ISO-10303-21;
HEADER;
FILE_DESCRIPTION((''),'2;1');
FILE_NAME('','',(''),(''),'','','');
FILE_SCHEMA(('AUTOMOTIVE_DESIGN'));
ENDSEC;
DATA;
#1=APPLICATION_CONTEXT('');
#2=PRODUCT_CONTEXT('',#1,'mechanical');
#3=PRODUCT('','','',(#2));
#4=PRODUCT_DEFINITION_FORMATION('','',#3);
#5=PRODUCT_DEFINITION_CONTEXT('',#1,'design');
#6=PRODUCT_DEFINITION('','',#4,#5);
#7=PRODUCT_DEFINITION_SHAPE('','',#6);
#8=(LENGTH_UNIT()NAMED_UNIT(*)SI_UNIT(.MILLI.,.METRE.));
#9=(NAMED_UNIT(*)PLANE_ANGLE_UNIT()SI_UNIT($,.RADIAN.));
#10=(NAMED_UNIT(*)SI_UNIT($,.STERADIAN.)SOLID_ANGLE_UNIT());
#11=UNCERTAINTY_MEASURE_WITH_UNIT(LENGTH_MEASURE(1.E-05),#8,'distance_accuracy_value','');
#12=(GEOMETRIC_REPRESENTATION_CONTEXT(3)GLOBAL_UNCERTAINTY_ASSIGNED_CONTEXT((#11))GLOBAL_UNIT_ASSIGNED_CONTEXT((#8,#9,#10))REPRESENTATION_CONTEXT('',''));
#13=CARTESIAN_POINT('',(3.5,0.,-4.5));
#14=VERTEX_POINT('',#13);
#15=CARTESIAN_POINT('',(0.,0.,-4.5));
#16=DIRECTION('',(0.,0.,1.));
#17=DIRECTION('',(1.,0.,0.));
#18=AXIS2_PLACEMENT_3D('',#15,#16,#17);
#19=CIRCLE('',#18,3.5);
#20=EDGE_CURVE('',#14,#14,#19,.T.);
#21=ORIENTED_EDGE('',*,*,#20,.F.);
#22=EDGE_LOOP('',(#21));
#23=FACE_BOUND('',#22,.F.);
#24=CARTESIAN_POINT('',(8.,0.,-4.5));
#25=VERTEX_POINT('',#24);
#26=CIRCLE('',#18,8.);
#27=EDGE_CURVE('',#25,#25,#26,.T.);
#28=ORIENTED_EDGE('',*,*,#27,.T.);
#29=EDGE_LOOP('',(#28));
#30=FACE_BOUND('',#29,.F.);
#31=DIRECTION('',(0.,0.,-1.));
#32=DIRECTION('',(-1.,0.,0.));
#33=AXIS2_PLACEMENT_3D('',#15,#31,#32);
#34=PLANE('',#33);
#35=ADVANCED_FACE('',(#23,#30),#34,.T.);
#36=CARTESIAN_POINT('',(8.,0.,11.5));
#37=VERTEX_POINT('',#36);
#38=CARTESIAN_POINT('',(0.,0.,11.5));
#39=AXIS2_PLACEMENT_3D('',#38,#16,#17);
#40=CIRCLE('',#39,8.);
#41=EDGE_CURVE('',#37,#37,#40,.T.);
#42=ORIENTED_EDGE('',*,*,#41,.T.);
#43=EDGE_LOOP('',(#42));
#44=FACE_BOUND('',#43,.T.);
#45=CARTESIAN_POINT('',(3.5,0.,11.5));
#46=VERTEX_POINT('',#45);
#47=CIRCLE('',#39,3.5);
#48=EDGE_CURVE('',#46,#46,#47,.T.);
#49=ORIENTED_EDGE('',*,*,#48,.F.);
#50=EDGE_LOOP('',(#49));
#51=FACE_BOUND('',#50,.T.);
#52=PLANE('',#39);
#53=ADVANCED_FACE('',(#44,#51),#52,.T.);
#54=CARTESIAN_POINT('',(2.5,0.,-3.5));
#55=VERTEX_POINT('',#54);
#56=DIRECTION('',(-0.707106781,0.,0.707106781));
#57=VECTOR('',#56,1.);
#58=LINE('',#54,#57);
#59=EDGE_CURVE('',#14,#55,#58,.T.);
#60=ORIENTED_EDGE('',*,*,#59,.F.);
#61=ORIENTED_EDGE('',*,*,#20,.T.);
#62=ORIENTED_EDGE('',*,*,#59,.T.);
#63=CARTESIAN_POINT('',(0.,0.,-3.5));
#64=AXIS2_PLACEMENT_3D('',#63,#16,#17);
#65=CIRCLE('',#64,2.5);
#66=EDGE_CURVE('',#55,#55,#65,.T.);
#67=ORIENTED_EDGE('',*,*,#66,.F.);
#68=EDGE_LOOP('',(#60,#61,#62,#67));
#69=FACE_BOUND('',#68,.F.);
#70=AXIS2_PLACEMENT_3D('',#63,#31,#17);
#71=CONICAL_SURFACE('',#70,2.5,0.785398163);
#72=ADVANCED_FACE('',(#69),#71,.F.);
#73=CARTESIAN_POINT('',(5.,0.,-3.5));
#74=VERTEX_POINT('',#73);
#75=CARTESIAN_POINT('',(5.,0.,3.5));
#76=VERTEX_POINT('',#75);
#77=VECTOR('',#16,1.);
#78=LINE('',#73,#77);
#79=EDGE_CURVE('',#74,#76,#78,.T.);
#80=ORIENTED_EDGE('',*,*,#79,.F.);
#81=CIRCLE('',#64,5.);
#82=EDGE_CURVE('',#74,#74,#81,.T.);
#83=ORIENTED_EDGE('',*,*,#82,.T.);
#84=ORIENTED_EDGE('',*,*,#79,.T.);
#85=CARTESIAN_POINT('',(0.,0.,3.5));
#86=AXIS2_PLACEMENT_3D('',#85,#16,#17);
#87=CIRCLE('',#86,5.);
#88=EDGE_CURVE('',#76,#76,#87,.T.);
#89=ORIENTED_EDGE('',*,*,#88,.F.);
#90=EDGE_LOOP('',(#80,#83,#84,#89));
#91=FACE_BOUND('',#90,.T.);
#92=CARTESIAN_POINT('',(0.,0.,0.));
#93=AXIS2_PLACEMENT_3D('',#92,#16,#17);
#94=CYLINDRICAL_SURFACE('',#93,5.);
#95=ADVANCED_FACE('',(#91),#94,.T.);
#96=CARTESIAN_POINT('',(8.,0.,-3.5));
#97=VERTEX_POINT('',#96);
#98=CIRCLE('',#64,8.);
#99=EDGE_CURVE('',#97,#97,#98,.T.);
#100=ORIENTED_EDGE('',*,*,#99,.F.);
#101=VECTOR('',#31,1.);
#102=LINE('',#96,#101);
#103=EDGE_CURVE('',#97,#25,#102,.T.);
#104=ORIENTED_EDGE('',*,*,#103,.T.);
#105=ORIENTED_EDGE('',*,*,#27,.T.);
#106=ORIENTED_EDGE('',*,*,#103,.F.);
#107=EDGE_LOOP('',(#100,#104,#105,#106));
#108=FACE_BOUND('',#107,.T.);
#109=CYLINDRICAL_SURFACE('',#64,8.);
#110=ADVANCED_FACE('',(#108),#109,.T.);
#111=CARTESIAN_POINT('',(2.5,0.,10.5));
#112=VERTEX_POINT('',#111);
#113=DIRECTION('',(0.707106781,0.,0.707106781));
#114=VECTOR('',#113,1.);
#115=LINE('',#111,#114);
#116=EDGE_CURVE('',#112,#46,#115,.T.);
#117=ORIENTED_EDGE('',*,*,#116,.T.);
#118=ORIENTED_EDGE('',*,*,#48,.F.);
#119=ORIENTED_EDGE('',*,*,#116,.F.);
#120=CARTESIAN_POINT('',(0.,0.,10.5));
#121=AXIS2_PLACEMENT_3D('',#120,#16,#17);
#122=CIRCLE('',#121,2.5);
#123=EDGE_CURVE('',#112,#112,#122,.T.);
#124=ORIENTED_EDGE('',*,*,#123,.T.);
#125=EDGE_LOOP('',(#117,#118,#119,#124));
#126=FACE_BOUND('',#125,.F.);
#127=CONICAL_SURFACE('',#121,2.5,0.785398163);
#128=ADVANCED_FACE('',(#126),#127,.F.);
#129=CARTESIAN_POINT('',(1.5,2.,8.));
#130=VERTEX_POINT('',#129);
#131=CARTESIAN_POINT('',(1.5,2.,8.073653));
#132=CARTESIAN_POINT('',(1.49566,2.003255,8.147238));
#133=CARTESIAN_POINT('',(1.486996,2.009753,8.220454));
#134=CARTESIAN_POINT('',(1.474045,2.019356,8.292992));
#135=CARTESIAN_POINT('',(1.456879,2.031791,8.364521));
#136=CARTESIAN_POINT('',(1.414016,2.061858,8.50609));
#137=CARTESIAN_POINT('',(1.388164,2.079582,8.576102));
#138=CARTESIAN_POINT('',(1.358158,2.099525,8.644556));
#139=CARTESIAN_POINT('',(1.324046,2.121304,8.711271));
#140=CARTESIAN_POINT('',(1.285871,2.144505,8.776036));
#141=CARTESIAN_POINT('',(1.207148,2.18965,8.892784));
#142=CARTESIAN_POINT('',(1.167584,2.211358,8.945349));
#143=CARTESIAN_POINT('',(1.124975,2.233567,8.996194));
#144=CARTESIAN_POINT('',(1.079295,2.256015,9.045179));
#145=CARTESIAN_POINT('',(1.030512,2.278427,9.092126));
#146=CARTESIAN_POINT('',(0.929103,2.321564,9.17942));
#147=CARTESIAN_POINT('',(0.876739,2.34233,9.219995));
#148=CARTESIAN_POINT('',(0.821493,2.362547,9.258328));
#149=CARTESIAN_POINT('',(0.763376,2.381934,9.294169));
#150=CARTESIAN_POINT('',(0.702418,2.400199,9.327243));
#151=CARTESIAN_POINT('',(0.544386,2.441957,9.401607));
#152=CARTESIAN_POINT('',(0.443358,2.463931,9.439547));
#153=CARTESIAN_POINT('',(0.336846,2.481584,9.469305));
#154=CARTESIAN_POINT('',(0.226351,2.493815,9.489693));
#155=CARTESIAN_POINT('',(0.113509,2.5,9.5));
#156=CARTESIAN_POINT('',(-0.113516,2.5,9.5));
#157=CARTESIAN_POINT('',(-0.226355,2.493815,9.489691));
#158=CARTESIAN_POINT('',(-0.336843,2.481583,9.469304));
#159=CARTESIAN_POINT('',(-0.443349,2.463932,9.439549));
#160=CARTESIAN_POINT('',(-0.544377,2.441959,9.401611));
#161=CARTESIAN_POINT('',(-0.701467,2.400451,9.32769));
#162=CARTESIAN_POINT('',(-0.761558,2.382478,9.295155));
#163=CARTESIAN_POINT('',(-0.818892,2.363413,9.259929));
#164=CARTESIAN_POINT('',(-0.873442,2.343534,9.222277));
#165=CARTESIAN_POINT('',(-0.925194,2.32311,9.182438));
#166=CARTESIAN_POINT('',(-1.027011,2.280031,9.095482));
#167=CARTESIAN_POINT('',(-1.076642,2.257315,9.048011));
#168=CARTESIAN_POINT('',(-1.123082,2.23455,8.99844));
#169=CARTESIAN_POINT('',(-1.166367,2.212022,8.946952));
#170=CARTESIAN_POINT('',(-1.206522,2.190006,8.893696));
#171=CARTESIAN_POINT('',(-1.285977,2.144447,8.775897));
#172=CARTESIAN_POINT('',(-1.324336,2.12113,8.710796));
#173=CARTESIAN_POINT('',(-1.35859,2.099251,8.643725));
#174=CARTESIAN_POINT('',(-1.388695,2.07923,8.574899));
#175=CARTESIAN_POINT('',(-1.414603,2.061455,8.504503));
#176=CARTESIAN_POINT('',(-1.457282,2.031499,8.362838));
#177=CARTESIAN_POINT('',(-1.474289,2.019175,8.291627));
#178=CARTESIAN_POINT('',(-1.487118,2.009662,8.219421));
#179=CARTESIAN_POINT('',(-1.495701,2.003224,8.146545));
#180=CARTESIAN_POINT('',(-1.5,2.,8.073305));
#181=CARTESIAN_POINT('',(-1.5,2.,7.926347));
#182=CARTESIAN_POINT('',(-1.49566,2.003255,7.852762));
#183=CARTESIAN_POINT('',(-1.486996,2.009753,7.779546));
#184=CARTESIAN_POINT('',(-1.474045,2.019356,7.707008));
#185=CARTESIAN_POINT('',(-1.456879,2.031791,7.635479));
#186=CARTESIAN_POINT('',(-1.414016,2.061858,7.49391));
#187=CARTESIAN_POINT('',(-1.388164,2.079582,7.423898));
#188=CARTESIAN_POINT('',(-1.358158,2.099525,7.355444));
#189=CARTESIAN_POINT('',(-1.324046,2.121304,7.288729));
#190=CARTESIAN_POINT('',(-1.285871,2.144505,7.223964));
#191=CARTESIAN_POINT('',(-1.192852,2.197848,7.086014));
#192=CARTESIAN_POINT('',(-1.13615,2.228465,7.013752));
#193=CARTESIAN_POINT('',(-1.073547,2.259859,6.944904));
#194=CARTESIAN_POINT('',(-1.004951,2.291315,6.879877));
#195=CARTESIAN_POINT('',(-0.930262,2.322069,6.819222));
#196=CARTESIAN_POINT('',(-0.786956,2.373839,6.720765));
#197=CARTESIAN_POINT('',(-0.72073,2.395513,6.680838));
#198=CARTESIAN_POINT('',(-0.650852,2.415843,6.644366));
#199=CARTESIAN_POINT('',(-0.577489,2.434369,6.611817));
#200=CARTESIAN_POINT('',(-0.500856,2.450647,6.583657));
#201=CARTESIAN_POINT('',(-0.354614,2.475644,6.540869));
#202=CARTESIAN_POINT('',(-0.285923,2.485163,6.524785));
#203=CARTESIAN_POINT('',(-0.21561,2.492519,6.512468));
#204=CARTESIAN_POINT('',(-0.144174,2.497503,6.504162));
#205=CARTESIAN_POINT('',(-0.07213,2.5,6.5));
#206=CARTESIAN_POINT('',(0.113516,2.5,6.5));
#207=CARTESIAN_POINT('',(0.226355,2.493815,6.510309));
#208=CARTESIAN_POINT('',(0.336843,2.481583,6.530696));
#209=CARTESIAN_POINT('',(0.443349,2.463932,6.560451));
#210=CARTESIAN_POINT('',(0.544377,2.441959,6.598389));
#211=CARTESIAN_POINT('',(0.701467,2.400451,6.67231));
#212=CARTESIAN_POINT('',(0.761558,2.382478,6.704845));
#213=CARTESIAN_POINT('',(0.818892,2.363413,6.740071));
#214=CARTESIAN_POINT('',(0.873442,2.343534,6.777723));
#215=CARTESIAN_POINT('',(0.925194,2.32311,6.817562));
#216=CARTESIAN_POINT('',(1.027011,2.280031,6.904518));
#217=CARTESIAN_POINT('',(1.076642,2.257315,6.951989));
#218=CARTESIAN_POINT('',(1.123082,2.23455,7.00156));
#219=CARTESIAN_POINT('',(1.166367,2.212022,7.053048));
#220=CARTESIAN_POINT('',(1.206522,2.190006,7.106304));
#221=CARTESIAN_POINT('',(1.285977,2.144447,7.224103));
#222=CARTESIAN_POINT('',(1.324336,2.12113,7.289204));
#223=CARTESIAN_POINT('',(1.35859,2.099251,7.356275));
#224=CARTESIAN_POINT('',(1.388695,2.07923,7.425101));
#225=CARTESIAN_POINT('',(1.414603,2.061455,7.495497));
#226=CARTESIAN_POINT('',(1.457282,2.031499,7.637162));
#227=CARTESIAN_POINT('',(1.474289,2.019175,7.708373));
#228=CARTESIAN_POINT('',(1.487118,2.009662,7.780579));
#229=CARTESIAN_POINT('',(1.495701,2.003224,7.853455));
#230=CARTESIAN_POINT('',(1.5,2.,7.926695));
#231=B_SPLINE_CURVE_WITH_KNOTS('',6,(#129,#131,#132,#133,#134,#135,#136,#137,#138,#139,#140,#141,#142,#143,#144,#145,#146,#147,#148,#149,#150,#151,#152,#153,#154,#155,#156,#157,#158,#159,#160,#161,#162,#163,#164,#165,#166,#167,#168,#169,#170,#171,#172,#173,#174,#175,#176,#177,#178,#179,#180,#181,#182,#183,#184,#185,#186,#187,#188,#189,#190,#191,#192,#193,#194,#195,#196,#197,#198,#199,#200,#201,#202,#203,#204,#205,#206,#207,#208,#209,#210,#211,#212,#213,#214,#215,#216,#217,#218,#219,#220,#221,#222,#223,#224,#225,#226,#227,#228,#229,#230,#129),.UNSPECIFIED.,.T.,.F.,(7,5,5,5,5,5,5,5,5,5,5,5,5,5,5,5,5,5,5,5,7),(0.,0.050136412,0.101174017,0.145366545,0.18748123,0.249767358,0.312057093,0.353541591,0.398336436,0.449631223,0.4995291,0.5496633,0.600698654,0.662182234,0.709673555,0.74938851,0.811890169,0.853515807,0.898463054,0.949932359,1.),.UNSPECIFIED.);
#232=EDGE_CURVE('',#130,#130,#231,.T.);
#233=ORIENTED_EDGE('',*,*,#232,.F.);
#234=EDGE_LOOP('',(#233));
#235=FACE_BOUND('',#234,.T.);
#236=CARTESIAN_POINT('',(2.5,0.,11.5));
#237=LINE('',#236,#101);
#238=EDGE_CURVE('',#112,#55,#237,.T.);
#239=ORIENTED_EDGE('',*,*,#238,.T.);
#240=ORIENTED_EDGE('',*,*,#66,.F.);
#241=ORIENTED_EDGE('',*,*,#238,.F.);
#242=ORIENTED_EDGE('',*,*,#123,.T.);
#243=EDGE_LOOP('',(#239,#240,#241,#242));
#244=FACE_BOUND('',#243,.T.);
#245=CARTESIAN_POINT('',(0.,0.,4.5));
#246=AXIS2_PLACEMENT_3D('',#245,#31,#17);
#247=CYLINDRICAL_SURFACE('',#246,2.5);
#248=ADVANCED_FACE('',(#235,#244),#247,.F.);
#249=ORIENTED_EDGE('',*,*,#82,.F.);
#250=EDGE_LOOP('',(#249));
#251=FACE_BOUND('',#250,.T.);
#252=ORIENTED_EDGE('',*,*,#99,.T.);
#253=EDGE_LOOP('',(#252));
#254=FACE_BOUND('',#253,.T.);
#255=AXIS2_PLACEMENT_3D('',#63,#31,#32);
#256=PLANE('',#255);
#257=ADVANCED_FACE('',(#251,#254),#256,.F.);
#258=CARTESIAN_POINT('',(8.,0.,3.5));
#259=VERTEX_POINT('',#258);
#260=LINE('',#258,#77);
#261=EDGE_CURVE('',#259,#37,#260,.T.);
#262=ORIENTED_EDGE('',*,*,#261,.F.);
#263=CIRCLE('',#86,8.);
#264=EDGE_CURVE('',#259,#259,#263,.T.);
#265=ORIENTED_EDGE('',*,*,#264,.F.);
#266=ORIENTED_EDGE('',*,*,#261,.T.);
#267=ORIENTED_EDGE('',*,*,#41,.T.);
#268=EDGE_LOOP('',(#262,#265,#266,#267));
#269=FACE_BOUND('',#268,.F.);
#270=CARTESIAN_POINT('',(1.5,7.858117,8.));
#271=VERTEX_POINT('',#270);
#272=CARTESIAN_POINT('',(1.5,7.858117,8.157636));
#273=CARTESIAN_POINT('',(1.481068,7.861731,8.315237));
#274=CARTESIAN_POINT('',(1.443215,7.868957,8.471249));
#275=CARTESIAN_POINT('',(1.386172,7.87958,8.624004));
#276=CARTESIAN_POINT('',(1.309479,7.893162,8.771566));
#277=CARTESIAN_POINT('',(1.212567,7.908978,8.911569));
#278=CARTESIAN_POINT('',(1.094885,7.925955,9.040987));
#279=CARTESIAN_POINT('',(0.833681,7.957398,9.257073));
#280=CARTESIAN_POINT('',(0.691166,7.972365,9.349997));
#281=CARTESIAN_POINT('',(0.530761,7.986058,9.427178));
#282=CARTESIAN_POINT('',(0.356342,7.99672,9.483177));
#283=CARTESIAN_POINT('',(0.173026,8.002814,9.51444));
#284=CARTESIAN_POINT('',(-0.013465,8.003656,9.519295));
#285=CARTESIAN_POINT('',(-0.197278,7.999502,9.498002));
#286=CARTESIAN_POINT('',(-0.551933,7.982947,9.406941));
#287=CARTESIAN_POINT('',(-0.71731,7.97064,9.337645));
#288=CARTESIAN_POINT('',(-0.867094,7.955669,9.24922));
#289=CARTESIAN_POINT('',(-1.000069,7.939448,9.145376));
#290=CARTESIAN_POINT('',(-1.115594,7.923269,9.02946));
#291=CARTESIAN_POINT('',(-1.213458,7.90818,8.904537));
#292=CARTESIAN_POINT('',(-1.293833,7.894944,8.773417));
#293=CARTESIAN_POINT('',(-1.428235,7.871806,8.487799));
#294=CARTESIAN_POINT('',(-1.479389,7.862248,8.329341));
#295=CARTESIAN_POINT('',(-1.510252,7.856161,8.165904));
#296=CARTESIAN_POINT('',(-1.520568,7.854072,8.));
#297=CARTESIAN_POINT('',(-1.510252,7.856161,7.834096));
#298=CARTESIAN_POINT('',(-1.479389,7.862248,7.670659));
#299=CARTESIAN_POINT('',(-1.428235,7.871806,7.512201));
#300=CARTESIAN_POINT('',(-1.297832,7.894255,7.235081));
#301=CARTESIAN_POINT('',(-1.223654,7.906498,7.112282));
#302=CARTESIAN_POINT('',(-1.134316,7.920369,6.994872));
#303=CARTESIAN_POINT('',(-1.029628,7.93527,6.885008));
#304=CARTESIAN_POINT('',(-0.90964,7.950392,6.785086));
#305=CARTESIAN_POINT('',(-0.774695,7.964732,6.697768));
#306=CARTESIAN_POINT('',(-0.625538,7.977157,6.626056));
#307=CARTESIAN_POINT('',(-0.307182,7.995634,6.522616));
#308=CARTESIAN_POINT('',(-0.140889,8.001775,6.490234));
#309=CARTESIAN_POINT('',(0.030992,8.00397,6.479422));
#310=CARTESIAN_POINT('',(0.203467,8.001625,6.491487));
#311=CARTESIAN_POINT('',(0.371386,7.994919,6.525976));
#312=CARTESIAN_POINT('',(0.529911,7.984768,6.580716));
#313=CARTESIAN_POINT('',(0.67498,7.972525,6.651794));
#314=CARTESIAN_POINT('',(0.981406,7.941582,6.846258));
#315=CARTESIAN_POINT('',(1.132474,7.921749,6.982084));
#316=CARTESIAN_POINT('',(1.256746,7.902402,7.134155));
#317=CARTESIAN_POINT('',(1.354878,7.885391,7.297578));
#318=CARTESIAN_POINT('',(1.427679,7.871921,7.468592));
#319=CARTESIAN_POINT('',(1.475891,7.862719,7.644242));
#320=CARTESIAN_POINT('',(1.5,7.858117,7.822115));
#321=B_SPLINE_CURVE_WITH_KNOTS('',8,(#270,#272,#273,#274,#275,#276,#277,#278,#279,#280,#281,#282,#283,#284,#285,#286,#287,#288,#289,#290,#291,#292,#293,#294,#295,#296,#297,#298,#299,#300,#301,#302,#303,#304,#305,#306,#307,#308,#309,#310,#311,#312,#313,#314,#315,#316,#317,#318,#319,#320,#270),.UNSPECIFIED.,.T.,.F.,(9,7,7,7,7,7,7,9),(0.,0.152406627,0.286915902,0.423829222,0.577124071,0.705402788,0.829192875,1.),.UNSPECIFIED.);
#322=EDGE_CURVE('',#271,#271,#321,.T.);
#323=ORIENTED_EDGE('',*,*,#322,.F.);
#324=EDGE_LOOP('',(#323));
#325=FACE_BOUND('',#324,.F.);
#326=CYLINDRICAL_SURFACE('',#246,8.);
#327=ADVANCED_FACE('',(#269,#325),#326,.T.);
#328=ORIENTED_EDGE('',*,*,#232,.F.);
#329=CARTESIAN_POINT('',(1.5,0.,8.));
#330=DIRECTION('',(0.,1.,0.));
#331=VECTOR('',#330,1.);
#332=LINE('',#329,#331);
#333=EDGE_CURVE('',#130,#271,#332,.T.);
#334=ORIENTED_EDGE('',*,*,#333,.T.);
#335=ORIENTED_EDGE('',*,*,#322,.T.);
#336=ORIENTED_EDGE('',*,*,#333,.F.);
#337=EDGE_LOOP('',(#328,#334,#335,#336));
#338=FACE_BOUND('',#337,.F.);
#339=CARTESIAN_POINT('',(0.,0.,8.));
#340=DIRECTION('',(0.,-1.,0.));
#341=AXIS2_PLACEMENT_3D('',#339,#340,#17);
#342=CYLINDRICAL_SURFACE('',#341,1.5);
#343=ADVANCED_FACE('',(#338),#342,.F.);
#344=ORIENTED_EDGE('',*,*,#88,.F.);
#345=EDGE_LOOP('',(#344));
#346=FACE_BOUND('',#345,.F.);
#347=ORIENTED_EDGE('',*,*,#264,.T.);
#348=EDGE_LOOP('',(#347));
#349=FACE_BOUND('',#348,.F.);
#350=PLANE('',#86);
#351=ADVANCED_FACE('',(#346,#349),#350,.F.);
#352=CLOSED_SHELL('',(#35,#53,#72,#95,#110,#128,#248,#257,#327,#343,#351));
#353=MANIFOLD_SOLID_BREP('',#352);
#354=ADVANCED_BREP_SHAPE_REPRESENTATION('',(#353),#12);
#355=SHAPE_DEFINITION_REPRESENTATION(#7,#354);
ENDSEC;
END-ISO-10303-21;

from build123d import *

# Parameters (mm, degrees)
F0_R     = 5
F0_R_2   = 2.5
F1_DEPTH = 3.5
F2_R     = 8
F2_R_2   = 2.5
F3_DEPTH = 1
F5_R     = 8
F5_R_2   = 2.5
F6_DEPTH = 7
F7_SIZE  = 1
F8_R     = 1.5
F9_DEPTH = 8.001


# Not quite as in the source:
# - a feature names something its author has since deleted; it is built from what else it names


with BuildPart() as f1:
    # F0 (on Top) → F1 (new body, symmetric)
    with BuildSketch(Plane.XY):
        Circle(F0_R)
        Circle(F0_R_2, mode=Mode.SUBTRACT)
    extrude(amount=F1_DEPTH, both=True)

    # F2 (on face) → F3 (join)
    with BuildSketch(Plane.XY.offset(3.5)):
        Circle(F2_R)
        Circle(F2_R_2, mode=Mode.SUBTRACT)
    extrude(amount=F3_DEPTH)

    # F4: F1 across plane


with BuildPart() as f1_1:
    add(f1.part)
    add(f1.part.mirror(Plane.XY))

    # F5 (on face) → F6 (join)
    with BuildSketch(Plane.XY.offset(4.5)):
        Circle(F5_R)
        Circle(F5_R_2, mode=Mode.SUBTRACT)
    extrude(amount=F6_DEPTH)

    # F7
    f7_edges = [f1_1.edges().sort_by_distance(p)[0] for p in [
        (-2.5, 0, 11.5),
        (-2.5, 0, -4.5),
    ]]
    chamfer(f7_edges, length=F7_SIZE)

    # F8 (on Front) → F9 (cut, through all)
    with BuildSketch(Plane.XZ):
        with Locations((0, 8)):
            Circle(F8_R)
    extrude(amount=-F9_DEPTH, mode=Mode.SUBTRACT)


solid = f1_1.part
